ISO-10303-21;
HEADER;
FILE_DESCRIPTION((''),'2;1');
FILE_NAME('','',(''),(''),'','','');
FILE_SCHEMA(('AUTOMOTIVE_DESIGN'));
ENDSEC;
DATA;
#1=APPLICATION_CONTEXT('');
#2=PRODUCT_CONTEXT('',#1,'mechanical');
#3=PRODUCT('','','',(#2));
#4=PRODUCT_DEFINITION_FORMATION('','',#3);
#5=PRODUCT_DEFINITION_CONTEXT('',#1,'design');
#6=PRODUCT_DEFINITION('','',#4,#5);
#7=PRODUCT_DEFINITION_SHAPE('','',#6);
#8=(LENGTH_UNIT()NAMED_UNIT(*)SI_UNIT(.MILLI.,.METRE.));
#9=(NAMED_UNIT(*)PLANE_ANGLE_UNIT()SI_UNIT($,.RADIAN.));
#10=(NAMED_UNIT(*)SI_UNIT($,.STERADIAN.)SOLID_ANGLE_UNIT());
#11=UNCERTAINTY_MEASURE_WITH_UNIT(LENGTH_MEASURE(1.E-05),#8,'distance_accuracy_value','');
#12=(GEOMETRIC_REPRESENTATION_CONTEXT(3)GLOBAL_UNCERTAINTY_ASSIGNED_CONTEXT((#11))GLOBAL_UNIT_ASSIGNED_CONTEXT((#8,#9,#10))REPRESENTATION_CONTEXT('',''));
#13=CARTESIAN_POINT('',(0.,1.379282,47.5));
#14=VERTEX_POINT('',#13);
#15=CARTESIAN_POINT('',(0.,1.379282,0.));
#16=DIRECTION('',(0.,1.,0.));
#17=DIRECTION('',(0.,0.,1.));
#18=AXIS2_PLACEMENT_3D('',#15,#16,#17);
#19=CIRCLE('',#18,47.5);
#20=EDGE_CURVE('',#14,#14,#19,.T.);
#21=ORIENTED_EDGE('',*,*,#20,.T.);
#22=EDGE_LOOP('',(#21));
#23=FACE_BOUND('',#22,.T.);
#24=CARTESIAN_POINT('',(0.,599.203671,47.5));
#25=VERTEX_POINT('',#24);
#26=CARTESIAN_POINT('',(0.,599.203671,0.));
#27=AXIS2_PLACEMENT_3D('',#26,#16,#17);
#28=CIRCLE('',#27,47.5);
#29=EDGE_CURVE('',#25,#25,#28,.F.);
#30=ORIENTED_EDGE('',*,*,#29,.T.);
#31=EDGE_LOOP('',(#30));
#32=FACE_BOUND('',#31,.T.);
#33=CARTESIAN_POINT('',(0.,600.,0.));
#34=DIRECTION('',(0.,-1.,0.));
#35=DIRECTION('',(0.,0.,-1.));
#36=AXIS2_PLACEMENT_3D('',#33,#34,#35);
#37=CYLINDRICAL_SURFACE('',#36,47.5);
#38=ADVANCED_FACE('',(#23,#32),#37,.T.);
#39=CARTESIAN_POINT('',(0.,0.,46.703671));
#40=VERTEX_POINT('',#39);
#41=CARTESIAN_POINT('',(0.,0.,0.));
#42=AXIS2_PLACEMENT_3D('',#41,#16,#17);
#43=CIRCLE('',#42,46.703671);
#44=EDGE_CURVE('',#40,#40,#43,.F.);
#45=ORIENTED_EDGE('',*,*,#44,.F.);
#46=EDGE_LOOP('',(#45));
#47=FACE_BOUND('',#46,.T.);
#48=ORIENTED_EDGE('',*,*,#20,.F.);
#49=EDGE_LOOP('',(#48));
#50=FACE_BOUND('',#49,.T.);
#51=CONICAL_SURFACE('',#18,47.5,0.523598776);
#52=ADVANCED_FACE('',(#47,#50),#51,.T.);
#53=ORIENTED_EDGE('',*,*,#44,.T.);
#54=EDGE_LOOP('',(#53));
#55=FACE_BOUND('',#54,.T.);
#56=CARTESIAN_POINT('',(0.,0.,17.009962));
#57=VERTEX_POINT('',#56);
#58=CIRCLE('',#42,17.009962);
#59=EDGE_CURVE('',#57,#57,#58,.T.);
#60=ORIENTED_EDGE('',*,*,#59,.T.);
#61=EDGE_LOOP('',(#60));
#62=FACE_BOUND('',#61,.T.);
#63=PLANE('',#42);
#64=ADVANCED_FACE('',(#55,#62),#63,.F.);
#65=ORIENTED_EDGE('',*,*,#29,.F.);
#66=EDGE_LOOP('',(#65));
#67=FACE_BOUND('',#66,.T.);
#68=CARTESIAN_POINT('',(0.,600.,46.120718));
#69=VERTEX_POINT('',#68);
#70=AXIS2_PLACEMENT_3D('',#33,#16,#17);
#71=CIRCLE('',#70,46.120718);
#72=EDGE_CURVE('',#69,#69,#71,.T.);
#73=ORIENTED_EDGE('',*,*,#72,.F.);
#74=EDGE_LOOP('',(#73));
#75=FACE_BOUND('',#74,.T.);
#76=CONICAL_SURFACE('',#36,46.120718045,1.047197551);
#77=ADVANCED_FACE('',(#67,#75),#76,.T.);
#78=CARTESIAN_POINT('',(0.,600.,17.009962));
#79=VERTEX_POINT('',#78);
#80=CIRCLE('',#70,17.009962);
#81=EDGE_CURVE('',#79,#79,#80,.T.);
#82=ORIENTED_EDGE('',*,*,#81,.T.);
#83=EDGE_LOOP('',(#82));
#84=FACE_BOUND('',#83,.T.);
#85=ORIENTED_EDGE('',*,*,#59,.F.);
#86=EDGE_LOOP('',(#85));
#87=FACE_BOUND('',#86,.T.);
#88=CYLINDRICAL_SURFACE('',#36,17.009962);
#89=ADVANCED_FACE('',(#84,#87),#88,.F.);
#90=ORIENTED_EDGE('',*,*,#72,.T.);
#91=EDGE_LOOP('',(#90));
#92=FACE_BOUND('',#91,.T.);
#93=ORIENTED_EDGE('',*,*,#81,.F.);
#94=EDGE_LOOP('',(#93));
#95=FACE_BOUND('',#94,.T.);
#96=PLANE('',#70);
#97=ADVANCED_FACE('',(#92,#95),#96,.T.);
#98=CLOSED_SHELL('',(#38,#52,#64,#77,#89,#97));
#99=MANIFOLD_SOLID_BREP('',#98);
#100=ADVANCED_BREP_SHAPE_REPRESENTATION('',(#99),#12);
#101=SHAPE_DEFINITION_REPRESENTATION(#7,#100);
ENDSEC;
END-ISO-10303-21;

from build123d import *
from OCP.BRepFilletAPI import BRepFilletAPI_MakeChamfer

# Parameters (mm, degrees)
SKETCH1_R           = 47.5
BOSS_EXTRUDE1_DEPTH = 600
SKETCH2_R           = 17.009961565
CUT_EXTRUDE1_DEPTH  = 604.748706003
CHAMFER1_SIZE       = 0.796328808
CHAMFER1_SIZE2      = 1.379281955


with BuildPart() as part:
    # Sketch1 → Boss-Extrude1 (new body)
    with BuildSketch(Plane(origin=(0, 0, 0), x_dir=(1, 0, 0), z_dir=(0, 1, 0))):
        Circle(SKETCH1_R)
    extrude(amount=BOSS_EXTRUDE1_DEPTH)

    # Sketch2 → Cut-Extrude1 (cut, through all)
    with BuildSketch(Plane(origin=(0, 0, 0), x_dir=(1, 0, 0), z_dir=(0, 1, 0))):
        Circle(SKETCH2_R)
    extrude(amount=CUT_EXTRUDE1_DEPTH, mode=Mode.SUBTRACT)

    # Chamfer1: one chamfer whose edges measure the first distance from different faces: ONE call of the kernel's chamfer builder (chamfer() names one face for all edges)
    chamfer1_edges_1 = [part.edges().sort_by_distance(p)[0] for p in [
        (-47.5, 600, 0),
    ]]
    chamfer1_side_1 = [part.faces().sort_by_distance(p)[0] for p in [
        (-47.5, 300, 0),
    ]]
    chamfer1_edges_2 = [part.edges().sort_by_distance(p)[0] for p in [
        (-47.5, 0, 0),
    ]]
    chamfer1_side_2 = [part.faces().sort_by_distance(p)[0] for p in [
        (-46.156497116, 0, 0),
    ]]
    chamfer1 = BRepFilletAPI_MakeChamfer(part.part.solid().wrapped)
    for e in chamfer1_edges_1:
        chamfer1.Add(CHAMFER1_SIZE, CHAMFER1_SIZE2, e.wrapped, chamfer1_side_1[0].wrapped)  # the first distance lies on this face
    for e in chamfer1_edges_2:
        chamfer1.Add(CHAMFER1_SIZE, CHAMFER1_SIZE2, e.wrapped, chamfer1_side_2[0].wrapped)  # the first distance lies on this face
    add(Compound.cast(chamfer1.Shape()), mode=Mode.REPLACE)


solid = part.part
